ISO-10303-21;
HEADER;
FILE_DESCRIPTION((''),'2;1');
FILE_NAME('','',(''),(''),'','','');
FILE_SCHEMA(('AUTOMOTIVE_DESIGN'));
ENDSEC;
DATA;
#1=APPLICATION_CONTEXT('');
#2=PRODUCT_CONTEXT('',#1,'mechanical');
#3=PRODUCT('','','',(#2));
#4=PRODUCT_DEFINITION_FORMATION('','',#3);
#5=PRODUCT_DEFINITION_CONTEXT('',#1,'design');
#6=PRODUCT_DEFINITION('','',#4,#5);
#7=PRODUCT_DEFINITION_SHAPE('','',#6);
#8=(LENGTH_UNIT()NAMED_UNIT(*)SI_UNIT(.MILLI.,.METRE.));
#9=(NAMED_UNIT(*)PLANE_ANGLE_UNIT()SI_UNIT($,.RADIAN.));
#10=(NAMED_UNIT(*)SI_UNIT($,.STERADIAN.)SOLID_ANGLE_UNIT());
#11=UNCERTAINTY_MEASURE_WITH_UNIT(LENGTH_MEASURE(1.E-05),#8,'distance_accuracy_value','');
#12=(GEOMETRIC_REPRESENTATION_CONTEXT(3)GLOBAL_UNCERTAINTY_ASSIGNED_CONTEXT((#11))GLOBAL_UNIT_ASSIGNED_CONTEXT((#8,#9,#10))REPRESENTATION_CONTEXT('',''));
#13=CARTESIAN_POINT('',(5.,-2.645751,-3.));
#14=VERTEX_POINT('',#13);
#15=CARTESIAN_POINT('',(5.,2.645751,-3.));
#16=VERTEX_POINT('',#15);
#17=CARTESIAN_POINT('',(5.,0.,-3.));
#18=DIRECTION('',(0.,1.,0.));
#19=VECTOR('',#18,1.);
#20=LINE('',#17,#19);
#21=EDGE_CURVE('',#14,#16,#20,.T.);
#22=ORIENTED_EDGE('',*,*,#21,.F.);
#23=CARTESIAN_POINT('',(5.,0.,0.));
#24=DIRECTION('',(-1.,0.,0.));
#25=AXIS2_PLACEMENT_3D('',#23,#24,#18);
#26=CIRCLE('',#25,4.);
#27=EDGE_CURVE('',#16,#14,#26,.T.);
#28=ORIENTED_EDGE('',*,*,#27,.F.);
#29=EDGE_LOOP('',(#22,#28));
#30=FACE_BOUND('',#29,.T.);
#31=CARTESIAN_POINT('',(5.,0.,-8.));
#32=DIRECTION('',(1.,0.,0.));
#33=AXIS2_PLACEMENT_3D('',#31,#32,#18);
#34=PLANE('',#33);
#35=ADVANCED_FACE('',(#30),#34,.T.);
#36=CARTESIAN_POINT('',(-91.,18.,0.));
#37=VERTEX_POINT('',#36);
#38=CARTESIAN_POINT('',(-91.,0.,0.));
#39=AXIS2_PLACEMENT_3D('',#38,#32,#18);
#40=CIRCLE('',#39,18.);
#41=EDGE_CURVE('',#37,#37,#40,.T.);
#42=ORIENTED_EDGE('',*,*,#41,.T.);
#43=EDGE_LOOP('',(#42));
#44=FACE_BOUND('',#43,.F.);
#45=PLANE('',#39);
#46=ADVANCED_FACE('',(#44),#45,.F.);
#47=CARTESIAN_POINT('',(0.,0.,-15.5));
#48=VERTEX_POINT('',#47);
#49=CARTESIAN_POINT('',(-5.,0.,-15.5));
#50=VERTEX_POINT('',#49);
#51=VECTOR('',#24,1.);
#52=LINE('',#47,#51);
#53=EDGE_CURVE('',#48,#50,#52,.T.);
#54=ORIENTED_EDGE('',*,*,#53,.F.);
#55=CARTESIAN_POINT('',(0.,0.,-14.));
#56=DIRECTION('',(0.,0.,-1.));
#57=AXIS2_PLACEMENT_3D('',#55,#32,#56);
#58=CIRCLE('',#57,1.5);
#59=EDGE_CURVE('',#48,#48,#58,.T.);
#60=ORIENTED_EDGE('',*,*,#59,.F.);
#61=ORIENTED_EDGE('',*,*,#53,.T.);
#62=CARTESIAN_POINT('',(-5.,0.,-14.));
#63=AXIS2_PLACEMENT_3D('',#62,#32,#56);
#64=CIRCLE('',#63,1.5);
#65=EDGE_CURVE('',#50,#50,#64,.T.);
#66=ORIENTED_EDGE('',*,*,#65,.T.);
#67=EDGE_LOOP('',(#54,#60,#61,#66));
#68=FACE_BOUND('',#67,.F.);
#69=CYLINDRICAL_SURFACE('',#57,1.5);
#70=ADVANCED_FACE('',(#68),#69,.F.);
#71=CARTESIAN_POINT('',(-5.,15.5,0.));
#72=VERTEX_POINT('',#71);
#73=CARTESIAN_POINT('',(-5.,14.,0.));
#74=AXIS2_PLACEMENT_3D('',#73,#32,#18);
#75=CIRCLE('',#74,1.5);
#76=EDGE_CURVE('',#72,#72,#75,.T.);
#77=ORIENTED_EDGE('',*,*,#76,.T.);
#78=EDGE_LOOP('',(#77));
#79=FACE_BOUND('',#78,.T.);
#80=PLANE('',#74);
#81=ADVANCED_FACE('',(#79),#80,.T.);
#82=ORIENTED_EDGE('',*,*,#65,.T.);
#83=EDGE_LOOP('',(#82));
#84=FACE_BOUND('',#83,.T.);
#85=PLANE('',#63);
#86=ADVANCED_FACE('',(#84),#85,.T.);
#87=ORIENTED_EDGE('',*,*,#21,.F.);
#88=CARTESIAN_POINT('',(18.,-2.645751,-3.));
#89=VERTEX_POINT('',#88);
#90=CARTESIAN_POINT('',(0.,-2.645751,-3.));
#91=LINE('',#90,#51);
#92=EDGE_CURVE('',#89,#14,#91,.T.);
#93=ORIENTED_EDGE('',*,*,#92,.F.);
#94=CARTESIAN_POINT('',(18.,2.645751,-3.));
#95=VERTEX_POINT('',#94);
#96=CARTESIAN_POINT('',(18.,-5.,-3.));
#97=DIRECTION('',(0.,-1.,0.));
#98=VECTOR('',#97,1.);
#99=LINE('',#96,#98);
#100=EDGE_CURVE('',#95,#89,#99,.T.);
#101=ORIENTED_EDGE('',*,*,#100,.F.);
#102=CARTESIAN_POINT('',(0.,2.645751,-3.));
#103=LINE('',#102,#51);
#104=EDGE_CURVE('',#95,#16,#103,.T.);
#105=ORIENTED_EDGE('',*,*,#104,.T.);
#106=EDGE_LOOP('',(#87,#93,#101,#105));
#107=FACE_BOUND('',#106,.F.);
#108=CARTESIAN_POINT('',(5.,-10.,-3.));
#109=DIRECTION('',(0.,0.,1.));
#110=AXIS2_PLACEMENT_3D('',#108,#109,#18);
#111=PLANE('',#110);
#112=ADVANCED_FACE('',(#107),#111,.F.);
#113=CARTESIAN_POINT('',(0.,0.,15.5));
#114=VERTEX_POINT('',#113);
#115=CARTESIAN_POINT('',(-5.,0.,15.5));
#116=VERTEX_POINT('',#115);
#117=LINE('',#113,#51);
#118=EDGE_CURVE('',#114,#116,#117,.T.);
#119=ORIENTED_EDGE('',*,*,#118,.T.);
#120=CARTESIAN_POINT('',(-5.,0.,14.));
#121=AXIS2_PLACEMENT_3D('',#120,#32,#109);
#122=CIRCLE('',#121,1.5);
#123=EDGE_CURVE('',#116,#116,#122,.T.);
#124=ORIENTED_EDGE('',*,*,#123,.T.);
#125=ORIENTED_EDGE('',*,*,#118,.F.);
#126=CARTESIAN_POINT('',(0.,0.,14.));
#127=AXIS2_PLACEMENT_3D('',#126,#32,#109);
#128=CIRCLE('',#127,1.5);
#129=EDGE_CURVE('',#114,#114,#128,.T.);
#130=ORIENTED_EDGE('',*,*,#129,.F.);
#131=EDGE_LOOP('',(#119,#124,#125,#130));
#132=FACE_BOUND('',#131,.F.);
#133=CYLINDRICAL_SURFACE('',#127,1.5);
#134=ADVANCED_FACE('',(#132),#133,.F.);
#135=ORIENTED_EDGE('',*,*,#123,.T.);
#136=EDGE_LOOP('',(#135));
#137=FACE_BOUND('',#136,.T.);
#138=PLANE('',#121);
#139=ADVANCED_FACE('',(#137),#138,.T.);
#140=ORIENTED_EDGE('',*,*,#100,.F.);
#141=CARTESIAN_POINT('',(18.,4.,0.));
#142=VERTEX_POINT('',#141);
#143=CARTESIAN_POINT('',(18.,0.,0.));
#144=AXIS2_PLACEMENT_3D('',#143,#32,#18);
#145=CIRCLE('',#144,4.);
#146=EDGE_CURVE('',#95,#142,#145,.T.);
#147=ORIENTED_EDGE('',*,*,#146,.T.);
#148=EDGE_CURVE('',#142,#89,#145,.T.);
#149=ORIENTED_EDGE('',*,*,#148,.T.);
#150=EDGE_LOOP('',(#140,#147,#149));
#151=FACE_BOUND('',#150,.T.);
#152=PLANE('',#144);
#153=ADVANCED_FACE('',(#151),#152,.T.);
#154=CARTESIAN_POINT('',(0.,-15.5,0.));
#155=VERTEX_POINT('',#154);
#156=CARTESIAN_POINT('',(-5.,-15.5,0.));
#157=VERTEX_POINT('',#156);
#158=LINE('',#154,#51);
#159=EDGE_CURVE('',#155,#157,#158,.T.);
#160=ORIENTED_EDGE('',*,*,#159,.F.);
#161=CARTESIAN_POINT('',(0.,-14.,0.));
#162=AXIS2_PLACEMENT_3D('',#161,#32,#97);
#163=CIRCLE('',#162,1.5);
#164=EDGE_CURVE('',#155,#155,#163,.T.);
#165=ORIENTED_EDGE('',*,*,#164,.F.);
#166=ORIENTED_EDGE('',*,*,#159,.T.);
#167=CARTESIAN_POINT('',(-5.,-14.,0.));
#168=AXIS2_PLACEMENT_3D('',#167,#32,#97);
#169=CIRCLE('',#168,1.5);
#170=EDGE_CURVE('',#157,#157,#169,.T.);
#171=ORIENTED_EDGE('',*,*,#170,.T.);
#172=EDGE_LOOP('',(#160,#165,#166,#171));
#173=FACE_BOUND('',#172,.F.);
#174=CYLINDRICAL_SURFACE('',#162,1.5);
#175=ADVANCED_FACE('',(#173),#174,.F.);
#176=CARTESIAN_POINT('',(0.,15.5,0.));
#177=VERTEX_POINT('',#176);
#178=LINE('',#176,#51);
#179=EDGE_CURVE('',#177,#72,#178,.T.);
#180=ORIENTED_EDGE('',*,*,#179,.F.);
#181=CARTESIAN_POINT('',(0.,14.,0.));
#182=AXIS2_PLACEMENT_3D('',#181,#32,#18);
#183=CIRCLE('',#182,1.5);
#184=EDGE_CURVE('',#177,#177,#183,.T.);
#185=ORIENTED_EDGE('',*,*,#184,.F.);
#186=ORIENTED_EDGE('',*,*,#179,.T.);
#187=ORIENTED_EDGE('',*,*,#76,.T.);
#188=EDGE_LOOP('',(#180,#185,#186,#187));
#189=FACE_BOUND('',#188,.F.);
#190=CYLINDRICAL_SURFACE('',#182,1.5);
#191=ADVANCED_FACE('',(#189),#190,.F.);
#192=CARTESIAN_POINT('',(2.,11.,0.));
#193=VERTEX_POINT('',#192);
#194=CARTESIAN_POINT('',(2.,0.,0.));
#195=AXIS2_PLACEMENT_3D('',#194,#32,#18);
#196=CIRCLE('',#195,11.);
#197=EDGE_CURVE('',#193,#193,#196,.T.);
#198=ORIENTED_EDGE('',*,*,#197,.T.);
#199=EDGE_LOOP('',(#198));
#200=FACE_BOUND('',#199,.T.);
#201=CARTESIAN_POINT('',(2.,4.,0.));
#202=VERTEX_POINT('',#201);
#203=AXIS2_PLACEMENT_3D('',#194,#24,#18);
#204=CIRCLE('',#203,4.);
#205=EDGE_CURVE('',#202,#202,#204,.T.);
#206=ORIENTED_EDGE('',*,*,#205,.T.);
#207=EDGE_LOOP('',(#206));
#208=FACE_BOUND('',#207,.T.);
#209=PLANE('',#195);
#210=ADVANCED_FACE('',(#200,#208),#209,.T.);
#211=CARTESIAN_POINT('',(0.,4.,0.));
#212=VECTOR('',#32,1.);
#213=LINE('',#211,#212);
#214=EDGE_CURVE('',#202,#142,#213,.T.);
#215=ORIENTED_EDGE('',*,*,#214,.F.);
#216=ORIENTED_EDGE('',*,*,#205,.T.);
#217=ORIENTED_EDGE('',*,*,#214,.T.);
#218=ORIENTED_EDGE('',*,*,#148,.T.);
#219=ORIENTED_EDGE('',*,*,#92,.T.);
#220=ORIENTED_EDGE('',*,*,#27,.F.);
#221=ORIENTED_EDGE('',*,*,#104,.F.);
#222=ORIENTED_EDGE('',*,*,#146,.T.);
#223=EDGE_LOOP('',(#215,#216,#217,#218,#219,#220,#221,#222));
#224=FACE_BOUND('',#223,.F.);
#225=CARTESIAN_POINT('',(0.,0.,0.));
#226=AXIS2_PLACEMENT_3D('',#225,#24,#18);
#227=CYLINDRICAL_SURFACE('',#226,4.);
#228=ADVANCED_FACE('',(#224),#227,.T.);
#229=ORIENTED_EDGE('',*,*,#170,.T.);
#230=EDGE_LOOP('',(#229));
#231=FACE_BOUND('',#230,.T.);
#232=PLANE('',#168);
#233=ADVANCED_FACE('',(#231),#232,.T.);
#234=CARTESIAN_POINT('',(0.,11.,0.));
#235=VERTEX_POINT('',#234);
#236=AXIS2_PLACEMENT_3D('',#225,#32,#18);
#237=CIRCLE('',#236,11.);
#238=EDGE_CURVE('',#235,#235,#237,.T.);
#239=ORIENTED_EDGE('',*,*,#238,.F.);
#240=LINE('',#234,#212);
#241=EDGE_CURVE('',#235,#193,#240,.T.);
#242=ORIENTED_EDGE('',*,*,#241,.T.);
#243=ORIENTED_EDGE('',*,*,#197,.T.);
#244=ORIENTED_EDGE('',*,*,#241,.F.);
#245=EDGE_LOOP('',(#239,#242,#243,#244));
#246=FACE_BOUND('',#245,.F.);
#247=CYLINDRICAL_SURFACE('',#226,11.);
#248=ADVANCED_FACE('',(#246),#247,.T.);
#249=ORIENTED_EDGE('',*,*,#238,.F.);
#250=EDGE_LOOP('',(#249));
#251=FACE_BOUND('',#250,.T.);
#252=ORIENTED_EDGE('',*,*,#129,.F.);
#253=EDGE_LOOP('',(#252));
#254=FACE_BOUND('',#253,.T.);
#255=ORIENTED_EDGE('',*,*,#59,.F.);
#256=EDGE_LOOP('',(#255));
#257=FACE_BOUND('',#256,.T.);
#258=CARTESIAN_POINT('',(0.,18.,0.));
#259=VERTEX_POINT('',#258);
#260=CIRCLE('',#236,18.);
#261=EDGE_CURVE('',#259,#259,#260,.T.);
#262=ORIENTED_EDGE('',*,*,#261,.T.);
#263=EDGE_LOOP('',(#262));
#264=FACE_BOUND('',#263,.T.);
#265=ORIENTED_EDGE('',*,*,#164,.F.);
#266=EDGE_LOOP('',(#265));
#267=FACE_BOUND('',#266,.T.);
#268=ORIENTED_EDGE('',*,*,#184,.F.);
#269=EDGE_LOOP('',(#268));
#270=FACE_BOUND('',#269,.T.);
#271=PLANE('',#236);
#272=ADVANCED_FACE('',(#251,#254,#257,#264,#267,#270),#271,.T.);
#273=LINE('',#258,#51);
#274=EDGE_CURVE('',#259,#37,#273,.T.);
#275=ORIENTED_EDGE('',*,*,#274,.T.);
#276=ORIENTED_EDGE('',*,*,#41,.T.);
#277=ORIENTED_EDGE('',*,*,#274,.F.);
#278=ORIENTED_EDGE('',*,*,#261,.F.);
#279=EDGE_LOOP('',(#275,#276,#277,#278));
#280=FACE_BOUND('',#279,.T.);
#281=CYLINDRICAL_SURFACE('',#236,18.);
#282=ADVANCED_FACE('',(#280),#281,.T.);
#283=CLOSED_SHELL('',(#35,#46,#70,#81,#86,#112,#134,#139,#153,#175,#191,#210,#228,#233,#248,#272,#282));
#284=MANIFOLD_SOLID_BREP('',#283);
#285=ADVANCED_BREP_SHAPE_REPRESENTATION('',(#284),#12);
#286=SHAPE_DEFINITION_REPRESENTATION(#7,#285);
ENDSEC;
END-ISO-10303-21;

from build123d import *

# Parameters (mm, degrees)
F0_R            = 18
F1_DEPTH        = 91
F2_R            = 11
F3_DEPTH        = 2
F4_R            = 4
F5_DEPTH        = 18
F6_R            = 1.5
F7_DEPTH        = 5
F7_COPIES_COUNT = 4
F9_START        = 5
F8_W            = 20
F8_H            = 10
F9_DEPTH        = 20


# Not quite as in the source:
# - a pattern or mirror of a feature is missing from the dataset's text; its kind, count and spacing are read off the source's solid


with BuildPart() as f1:
    # F0 (on Right) → F1 (new body)
    with BuildSketch(Plane.YZ):
        Circle(F0_R)
    extrude(amount=-F1_DEPTH)

    # F2 (on Right) → F3 (join)
    with BuildSketch(Plane.YZ):
        Circle(F2_R)
    extrude(amount=F3_DEPTH)

    # F4 (on Right) → F5 (join)
    with BuildSketch(Plane.YZ):
        Circle(F4_R)
    extrude(amount=F5_DEPTH)

    # F6 (on Right) → F7 (cut)
    with BuildSketch(Plane.YZ):
        with Locations((14, 0)):
            Circle(F6_R)
    f7 = extrude(amount=-F7_DEPTH, mode=Mode.SUBTRACT)

    # F7_copies: F7 ×4 about axis
    f7_copies_axis = Axis((0, 0, 0), (1, 0, 0))
    for i in range(1, F7_COPIES_COUNT):
        add(f7.rotate(f7_copies_axis, i * 360 / F7_COPIES_COUNT), mode=Mode.SUBTRACT)

    # F8 (on Right) → F9 (cut)
    with BuildSketch(Plane.YZ.offset(F9_START)):
        with Locations((0, -8)):
            Rectangle(F8_W, F8_H)
    extrude(amount=F9_DEPTH, mode=Mode.SUBTRACT)


solid = f1.part
